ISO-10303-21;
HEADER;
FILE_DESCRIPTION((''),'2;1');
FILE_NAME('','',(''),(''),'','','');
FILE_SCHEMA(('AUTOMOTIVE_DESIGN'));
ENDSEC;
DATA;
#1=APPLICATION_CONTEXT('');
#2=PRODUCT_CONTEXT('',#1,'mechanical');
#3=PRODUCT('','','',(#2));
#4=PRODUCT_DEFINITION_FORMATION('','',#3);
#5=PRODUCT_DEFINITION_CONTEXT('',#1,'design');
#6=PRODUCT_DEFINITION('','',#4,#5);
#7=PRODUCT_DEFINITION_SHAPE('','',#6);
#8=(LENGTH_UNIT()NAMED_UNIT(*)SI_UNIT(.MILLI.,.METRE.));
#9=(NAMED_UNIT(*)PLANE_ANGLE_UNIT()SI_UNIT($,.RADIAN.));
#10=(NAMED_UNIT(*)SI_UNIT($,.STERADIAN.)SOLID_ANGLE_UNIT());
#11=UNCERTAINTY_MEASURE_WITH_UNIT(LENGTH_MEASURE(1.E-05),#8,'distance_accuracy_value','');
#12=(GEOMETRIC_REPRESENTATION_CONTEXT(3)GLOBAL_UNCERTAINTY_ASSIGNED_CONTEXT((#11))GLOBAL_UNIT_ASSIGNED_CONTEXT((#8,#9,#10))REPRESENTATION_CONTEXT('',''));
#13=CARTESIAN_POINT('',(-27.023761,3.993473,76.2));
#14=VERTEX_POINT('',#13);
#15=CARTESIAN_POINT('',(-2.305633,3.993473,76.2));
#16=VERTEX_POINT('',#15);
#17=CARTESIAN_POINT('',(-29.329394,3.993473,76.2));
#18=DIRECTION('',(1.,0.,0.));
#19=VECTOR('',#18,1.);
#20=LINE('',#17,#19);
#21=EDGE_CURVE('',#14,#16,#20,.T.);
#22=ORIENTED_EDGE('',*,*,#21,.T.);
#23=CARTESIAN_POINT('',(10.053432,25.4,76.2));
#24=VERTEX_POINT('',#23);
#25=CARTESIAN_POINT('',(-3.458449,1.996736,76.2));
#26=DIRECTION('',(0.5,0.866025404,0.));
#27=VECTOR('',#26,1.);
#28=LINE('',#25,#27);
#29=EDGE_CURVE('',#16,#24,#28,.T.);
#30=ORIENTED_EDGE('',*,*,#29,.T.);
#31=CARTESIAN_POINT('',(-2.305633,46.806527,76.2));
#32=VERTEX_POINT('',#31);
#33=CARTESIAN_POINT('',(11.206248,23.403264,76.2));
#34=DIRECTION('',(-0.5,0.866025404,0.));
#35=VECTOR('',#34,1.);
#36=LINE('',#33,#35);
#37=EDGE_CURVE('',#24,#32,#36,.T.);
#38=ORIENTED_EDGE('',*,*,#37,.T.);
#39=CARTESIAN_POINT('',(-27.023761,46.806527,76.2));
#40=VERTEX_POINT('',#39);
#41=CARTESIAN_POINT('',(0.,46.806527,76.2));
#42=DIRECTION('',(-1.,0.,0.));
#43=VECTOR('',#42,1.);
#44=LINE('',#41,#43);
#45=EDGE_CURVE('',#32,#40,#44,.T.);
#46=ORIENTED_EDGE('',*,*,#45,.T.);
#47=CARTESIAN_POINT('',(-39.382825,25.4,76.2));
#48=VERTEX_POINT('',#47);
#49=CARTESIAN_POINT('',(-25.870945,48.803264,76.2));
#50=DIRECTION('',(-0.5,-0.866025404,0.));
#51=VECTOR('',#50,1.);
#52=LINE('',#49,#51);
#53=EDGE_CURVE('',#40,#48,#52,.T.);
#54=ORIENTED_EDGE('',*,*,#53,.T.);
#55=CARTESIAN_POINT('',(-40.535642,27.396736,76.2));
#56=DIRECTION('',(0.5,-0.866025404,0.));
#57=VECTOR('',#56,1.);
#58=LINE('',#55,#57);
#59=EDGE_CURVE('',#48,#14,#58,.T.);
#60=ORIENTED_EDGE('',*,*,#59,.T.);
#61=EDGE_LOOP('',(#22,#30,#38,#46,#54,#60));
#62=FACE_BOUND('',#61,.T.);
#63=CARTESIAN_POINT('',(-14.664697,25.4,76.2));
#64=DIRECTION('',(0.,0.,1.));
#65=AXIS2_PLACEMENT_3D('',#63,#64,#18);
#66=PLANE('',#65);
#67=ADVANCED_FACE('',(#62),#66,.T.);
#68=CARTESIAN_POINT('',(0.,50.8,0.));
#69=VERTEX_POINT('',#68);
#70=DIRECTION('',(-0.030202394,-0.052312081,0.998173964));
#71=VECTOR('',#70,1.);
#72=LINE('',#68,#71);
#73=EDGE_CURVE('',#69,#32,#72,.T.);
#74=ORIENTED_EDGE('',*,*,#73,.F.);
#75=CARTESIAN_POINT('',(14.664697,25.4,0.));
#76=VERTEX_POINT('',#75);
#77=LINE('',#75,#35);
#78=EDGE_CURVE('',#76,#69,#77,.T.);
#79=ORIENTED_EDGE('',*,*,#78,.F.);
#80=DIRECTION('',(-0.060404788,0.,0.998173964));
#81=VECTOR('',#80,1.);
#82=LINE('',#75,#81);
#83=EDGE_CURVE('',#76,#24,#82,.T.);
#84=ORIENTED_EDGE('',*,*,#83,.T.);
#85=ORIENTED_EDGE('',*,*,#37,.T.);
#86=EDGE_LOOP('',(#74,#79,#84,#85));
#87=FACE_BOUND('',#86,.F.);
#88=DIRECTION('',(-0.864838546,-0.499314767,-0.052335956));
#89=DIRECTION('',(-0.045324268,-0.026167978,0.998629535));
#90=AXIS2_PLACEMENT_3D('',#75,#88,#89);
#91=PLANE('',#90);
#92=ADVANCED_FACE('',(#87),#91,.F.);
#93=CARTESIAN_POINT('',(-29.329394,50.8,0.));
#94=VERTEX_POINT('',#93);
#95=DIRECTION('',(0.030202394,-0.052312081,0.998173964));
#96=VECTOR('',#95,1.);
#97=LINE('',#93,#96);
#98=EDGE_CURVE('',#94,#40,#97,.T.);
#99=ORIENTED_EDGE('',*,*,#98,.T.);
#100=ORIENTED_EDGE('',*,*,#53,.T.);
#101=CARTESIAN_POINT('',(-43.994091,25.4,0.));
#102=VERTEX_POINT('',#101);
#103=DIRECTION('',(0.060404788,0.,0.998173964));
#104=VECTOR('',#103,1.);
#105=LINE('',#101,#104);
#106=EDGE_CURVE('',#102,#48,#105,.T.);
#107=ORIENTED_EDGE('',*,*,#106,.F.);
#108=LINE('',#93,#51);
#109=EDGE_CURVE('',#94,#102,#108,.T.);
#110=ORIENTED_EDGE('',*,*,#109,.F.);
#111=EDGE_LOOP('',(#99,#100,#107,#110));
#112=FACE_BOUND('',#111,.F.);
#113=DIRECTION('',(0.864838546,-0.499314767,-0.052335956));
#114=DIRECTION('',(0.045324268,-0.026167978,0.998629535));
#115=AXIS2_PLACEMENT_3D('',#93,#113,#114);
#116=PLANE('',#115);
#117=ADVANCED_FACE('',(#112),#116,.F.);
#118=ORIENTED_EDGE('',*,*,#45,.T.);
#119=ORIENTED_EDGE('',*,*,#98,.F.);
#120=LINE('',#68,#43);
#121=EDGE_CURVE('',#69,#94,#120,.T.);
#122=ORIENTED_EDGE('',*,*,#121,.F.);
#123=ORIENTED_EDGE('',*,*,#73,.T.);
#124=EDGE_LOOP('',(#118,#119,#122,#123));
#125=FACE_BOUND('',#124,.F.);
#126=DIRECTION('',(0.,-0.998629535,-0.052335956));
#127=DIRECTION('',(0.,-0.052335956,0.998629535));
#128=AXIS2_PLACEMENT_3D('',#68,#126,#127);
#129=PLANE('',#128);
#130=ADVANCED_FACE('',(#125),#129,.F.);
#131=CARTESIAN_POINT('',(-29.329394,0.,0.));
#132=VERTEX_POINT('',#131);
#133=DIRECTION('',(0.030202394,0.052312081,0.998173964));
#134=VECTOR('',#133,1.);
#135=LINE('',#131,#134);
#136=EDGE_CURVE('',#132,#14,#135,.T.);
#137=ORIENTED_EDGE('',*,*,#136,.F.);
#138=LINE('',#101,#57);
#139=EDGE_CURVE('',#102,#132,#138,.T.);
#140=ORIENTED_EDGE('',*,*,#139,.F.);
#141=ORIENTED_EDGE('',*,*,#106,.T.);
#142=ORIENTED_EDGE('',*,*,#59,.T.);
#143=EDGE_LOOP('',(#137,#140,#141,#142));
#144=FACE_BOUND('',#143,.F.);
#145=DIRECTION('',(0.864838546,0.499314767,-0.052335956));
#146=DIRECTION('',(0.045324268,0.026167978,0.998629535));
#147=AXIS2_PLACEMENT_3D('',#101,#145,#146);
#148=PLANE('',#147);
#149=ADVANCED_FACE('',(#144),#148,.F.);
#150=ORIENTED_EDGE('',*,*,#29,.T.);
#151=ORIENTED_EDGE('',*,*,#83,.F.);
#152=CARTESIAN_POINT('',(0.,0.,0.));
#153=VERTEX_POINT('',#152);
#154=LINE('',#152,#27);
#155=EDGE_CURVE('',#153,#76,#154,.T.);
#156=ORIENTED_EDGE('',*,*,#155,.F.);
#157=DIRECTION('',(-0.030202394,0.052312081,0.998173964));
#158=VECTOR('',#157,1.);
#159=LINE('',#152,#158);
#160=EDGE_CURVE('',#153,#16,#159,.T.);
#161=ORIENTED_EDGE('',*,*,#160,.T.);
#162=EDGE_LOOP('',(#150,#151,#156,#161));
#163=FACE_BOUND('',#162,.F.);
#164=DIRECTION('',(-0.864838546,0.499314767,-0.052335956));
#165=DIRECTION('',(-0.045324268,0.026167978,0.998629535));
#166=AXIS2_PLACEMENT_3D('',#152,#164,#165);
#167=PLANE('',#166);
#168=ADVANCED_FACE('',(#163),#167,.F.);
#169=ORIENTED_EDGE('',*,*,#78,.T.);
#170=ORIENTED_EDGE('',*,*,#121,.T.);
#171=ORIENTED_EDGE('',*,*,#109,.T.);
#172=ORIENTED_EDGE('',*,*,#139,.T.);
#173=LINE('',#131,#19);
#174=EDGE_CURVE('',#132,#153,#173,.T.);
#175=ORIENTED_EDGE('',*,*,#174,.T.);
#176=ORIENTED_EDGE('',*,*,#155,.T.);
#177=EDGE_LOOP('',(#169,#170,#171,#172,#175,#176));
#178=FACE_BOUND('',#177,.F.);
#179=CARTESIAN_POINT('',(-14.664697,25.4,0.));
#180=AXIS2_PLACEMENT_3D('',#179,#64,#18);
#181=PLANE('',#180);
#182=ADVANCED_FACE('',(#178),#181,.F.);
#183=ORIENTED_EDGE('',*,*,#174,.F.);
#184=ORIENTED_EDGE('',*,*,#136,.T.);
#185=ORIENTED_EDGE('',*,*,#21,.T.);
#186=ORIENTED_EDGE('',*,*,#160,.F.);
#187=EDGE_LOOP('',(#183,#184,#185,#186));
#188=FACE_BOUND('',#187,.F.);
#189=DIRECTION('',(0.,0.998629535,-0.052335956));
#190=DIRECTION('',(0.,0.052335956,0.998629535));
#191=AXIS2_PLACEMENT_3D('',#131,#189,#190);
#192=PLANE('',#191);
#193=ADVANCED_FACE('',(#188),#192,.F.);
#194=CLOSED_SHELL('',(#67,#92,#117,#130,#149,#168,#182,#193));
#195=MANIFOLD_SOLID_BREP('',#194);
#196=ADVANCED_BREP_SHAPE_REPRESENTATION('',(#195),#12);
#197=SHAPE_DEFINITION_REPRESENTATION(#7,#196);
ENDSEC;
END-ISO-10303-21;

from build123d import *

# Parameters (mm, degrees)
F1_DEPTH = 76.2
F1_TAPER = 3


with BuildPart() as f1:
    # F0 (on Top) → F1 (new body)
    with BuildSketch(Plane.XY):
        Polygon((-43.9940905122, 25.4), (-29.3293936748, 0), (0, 0), (14.6646968374, 25.4), (0, 50.8), (-29.3293936748, 50.8), align=None)
    extrude(amount=F1_DEPTH, taper=F1_TAPER)


solid = f1.part
